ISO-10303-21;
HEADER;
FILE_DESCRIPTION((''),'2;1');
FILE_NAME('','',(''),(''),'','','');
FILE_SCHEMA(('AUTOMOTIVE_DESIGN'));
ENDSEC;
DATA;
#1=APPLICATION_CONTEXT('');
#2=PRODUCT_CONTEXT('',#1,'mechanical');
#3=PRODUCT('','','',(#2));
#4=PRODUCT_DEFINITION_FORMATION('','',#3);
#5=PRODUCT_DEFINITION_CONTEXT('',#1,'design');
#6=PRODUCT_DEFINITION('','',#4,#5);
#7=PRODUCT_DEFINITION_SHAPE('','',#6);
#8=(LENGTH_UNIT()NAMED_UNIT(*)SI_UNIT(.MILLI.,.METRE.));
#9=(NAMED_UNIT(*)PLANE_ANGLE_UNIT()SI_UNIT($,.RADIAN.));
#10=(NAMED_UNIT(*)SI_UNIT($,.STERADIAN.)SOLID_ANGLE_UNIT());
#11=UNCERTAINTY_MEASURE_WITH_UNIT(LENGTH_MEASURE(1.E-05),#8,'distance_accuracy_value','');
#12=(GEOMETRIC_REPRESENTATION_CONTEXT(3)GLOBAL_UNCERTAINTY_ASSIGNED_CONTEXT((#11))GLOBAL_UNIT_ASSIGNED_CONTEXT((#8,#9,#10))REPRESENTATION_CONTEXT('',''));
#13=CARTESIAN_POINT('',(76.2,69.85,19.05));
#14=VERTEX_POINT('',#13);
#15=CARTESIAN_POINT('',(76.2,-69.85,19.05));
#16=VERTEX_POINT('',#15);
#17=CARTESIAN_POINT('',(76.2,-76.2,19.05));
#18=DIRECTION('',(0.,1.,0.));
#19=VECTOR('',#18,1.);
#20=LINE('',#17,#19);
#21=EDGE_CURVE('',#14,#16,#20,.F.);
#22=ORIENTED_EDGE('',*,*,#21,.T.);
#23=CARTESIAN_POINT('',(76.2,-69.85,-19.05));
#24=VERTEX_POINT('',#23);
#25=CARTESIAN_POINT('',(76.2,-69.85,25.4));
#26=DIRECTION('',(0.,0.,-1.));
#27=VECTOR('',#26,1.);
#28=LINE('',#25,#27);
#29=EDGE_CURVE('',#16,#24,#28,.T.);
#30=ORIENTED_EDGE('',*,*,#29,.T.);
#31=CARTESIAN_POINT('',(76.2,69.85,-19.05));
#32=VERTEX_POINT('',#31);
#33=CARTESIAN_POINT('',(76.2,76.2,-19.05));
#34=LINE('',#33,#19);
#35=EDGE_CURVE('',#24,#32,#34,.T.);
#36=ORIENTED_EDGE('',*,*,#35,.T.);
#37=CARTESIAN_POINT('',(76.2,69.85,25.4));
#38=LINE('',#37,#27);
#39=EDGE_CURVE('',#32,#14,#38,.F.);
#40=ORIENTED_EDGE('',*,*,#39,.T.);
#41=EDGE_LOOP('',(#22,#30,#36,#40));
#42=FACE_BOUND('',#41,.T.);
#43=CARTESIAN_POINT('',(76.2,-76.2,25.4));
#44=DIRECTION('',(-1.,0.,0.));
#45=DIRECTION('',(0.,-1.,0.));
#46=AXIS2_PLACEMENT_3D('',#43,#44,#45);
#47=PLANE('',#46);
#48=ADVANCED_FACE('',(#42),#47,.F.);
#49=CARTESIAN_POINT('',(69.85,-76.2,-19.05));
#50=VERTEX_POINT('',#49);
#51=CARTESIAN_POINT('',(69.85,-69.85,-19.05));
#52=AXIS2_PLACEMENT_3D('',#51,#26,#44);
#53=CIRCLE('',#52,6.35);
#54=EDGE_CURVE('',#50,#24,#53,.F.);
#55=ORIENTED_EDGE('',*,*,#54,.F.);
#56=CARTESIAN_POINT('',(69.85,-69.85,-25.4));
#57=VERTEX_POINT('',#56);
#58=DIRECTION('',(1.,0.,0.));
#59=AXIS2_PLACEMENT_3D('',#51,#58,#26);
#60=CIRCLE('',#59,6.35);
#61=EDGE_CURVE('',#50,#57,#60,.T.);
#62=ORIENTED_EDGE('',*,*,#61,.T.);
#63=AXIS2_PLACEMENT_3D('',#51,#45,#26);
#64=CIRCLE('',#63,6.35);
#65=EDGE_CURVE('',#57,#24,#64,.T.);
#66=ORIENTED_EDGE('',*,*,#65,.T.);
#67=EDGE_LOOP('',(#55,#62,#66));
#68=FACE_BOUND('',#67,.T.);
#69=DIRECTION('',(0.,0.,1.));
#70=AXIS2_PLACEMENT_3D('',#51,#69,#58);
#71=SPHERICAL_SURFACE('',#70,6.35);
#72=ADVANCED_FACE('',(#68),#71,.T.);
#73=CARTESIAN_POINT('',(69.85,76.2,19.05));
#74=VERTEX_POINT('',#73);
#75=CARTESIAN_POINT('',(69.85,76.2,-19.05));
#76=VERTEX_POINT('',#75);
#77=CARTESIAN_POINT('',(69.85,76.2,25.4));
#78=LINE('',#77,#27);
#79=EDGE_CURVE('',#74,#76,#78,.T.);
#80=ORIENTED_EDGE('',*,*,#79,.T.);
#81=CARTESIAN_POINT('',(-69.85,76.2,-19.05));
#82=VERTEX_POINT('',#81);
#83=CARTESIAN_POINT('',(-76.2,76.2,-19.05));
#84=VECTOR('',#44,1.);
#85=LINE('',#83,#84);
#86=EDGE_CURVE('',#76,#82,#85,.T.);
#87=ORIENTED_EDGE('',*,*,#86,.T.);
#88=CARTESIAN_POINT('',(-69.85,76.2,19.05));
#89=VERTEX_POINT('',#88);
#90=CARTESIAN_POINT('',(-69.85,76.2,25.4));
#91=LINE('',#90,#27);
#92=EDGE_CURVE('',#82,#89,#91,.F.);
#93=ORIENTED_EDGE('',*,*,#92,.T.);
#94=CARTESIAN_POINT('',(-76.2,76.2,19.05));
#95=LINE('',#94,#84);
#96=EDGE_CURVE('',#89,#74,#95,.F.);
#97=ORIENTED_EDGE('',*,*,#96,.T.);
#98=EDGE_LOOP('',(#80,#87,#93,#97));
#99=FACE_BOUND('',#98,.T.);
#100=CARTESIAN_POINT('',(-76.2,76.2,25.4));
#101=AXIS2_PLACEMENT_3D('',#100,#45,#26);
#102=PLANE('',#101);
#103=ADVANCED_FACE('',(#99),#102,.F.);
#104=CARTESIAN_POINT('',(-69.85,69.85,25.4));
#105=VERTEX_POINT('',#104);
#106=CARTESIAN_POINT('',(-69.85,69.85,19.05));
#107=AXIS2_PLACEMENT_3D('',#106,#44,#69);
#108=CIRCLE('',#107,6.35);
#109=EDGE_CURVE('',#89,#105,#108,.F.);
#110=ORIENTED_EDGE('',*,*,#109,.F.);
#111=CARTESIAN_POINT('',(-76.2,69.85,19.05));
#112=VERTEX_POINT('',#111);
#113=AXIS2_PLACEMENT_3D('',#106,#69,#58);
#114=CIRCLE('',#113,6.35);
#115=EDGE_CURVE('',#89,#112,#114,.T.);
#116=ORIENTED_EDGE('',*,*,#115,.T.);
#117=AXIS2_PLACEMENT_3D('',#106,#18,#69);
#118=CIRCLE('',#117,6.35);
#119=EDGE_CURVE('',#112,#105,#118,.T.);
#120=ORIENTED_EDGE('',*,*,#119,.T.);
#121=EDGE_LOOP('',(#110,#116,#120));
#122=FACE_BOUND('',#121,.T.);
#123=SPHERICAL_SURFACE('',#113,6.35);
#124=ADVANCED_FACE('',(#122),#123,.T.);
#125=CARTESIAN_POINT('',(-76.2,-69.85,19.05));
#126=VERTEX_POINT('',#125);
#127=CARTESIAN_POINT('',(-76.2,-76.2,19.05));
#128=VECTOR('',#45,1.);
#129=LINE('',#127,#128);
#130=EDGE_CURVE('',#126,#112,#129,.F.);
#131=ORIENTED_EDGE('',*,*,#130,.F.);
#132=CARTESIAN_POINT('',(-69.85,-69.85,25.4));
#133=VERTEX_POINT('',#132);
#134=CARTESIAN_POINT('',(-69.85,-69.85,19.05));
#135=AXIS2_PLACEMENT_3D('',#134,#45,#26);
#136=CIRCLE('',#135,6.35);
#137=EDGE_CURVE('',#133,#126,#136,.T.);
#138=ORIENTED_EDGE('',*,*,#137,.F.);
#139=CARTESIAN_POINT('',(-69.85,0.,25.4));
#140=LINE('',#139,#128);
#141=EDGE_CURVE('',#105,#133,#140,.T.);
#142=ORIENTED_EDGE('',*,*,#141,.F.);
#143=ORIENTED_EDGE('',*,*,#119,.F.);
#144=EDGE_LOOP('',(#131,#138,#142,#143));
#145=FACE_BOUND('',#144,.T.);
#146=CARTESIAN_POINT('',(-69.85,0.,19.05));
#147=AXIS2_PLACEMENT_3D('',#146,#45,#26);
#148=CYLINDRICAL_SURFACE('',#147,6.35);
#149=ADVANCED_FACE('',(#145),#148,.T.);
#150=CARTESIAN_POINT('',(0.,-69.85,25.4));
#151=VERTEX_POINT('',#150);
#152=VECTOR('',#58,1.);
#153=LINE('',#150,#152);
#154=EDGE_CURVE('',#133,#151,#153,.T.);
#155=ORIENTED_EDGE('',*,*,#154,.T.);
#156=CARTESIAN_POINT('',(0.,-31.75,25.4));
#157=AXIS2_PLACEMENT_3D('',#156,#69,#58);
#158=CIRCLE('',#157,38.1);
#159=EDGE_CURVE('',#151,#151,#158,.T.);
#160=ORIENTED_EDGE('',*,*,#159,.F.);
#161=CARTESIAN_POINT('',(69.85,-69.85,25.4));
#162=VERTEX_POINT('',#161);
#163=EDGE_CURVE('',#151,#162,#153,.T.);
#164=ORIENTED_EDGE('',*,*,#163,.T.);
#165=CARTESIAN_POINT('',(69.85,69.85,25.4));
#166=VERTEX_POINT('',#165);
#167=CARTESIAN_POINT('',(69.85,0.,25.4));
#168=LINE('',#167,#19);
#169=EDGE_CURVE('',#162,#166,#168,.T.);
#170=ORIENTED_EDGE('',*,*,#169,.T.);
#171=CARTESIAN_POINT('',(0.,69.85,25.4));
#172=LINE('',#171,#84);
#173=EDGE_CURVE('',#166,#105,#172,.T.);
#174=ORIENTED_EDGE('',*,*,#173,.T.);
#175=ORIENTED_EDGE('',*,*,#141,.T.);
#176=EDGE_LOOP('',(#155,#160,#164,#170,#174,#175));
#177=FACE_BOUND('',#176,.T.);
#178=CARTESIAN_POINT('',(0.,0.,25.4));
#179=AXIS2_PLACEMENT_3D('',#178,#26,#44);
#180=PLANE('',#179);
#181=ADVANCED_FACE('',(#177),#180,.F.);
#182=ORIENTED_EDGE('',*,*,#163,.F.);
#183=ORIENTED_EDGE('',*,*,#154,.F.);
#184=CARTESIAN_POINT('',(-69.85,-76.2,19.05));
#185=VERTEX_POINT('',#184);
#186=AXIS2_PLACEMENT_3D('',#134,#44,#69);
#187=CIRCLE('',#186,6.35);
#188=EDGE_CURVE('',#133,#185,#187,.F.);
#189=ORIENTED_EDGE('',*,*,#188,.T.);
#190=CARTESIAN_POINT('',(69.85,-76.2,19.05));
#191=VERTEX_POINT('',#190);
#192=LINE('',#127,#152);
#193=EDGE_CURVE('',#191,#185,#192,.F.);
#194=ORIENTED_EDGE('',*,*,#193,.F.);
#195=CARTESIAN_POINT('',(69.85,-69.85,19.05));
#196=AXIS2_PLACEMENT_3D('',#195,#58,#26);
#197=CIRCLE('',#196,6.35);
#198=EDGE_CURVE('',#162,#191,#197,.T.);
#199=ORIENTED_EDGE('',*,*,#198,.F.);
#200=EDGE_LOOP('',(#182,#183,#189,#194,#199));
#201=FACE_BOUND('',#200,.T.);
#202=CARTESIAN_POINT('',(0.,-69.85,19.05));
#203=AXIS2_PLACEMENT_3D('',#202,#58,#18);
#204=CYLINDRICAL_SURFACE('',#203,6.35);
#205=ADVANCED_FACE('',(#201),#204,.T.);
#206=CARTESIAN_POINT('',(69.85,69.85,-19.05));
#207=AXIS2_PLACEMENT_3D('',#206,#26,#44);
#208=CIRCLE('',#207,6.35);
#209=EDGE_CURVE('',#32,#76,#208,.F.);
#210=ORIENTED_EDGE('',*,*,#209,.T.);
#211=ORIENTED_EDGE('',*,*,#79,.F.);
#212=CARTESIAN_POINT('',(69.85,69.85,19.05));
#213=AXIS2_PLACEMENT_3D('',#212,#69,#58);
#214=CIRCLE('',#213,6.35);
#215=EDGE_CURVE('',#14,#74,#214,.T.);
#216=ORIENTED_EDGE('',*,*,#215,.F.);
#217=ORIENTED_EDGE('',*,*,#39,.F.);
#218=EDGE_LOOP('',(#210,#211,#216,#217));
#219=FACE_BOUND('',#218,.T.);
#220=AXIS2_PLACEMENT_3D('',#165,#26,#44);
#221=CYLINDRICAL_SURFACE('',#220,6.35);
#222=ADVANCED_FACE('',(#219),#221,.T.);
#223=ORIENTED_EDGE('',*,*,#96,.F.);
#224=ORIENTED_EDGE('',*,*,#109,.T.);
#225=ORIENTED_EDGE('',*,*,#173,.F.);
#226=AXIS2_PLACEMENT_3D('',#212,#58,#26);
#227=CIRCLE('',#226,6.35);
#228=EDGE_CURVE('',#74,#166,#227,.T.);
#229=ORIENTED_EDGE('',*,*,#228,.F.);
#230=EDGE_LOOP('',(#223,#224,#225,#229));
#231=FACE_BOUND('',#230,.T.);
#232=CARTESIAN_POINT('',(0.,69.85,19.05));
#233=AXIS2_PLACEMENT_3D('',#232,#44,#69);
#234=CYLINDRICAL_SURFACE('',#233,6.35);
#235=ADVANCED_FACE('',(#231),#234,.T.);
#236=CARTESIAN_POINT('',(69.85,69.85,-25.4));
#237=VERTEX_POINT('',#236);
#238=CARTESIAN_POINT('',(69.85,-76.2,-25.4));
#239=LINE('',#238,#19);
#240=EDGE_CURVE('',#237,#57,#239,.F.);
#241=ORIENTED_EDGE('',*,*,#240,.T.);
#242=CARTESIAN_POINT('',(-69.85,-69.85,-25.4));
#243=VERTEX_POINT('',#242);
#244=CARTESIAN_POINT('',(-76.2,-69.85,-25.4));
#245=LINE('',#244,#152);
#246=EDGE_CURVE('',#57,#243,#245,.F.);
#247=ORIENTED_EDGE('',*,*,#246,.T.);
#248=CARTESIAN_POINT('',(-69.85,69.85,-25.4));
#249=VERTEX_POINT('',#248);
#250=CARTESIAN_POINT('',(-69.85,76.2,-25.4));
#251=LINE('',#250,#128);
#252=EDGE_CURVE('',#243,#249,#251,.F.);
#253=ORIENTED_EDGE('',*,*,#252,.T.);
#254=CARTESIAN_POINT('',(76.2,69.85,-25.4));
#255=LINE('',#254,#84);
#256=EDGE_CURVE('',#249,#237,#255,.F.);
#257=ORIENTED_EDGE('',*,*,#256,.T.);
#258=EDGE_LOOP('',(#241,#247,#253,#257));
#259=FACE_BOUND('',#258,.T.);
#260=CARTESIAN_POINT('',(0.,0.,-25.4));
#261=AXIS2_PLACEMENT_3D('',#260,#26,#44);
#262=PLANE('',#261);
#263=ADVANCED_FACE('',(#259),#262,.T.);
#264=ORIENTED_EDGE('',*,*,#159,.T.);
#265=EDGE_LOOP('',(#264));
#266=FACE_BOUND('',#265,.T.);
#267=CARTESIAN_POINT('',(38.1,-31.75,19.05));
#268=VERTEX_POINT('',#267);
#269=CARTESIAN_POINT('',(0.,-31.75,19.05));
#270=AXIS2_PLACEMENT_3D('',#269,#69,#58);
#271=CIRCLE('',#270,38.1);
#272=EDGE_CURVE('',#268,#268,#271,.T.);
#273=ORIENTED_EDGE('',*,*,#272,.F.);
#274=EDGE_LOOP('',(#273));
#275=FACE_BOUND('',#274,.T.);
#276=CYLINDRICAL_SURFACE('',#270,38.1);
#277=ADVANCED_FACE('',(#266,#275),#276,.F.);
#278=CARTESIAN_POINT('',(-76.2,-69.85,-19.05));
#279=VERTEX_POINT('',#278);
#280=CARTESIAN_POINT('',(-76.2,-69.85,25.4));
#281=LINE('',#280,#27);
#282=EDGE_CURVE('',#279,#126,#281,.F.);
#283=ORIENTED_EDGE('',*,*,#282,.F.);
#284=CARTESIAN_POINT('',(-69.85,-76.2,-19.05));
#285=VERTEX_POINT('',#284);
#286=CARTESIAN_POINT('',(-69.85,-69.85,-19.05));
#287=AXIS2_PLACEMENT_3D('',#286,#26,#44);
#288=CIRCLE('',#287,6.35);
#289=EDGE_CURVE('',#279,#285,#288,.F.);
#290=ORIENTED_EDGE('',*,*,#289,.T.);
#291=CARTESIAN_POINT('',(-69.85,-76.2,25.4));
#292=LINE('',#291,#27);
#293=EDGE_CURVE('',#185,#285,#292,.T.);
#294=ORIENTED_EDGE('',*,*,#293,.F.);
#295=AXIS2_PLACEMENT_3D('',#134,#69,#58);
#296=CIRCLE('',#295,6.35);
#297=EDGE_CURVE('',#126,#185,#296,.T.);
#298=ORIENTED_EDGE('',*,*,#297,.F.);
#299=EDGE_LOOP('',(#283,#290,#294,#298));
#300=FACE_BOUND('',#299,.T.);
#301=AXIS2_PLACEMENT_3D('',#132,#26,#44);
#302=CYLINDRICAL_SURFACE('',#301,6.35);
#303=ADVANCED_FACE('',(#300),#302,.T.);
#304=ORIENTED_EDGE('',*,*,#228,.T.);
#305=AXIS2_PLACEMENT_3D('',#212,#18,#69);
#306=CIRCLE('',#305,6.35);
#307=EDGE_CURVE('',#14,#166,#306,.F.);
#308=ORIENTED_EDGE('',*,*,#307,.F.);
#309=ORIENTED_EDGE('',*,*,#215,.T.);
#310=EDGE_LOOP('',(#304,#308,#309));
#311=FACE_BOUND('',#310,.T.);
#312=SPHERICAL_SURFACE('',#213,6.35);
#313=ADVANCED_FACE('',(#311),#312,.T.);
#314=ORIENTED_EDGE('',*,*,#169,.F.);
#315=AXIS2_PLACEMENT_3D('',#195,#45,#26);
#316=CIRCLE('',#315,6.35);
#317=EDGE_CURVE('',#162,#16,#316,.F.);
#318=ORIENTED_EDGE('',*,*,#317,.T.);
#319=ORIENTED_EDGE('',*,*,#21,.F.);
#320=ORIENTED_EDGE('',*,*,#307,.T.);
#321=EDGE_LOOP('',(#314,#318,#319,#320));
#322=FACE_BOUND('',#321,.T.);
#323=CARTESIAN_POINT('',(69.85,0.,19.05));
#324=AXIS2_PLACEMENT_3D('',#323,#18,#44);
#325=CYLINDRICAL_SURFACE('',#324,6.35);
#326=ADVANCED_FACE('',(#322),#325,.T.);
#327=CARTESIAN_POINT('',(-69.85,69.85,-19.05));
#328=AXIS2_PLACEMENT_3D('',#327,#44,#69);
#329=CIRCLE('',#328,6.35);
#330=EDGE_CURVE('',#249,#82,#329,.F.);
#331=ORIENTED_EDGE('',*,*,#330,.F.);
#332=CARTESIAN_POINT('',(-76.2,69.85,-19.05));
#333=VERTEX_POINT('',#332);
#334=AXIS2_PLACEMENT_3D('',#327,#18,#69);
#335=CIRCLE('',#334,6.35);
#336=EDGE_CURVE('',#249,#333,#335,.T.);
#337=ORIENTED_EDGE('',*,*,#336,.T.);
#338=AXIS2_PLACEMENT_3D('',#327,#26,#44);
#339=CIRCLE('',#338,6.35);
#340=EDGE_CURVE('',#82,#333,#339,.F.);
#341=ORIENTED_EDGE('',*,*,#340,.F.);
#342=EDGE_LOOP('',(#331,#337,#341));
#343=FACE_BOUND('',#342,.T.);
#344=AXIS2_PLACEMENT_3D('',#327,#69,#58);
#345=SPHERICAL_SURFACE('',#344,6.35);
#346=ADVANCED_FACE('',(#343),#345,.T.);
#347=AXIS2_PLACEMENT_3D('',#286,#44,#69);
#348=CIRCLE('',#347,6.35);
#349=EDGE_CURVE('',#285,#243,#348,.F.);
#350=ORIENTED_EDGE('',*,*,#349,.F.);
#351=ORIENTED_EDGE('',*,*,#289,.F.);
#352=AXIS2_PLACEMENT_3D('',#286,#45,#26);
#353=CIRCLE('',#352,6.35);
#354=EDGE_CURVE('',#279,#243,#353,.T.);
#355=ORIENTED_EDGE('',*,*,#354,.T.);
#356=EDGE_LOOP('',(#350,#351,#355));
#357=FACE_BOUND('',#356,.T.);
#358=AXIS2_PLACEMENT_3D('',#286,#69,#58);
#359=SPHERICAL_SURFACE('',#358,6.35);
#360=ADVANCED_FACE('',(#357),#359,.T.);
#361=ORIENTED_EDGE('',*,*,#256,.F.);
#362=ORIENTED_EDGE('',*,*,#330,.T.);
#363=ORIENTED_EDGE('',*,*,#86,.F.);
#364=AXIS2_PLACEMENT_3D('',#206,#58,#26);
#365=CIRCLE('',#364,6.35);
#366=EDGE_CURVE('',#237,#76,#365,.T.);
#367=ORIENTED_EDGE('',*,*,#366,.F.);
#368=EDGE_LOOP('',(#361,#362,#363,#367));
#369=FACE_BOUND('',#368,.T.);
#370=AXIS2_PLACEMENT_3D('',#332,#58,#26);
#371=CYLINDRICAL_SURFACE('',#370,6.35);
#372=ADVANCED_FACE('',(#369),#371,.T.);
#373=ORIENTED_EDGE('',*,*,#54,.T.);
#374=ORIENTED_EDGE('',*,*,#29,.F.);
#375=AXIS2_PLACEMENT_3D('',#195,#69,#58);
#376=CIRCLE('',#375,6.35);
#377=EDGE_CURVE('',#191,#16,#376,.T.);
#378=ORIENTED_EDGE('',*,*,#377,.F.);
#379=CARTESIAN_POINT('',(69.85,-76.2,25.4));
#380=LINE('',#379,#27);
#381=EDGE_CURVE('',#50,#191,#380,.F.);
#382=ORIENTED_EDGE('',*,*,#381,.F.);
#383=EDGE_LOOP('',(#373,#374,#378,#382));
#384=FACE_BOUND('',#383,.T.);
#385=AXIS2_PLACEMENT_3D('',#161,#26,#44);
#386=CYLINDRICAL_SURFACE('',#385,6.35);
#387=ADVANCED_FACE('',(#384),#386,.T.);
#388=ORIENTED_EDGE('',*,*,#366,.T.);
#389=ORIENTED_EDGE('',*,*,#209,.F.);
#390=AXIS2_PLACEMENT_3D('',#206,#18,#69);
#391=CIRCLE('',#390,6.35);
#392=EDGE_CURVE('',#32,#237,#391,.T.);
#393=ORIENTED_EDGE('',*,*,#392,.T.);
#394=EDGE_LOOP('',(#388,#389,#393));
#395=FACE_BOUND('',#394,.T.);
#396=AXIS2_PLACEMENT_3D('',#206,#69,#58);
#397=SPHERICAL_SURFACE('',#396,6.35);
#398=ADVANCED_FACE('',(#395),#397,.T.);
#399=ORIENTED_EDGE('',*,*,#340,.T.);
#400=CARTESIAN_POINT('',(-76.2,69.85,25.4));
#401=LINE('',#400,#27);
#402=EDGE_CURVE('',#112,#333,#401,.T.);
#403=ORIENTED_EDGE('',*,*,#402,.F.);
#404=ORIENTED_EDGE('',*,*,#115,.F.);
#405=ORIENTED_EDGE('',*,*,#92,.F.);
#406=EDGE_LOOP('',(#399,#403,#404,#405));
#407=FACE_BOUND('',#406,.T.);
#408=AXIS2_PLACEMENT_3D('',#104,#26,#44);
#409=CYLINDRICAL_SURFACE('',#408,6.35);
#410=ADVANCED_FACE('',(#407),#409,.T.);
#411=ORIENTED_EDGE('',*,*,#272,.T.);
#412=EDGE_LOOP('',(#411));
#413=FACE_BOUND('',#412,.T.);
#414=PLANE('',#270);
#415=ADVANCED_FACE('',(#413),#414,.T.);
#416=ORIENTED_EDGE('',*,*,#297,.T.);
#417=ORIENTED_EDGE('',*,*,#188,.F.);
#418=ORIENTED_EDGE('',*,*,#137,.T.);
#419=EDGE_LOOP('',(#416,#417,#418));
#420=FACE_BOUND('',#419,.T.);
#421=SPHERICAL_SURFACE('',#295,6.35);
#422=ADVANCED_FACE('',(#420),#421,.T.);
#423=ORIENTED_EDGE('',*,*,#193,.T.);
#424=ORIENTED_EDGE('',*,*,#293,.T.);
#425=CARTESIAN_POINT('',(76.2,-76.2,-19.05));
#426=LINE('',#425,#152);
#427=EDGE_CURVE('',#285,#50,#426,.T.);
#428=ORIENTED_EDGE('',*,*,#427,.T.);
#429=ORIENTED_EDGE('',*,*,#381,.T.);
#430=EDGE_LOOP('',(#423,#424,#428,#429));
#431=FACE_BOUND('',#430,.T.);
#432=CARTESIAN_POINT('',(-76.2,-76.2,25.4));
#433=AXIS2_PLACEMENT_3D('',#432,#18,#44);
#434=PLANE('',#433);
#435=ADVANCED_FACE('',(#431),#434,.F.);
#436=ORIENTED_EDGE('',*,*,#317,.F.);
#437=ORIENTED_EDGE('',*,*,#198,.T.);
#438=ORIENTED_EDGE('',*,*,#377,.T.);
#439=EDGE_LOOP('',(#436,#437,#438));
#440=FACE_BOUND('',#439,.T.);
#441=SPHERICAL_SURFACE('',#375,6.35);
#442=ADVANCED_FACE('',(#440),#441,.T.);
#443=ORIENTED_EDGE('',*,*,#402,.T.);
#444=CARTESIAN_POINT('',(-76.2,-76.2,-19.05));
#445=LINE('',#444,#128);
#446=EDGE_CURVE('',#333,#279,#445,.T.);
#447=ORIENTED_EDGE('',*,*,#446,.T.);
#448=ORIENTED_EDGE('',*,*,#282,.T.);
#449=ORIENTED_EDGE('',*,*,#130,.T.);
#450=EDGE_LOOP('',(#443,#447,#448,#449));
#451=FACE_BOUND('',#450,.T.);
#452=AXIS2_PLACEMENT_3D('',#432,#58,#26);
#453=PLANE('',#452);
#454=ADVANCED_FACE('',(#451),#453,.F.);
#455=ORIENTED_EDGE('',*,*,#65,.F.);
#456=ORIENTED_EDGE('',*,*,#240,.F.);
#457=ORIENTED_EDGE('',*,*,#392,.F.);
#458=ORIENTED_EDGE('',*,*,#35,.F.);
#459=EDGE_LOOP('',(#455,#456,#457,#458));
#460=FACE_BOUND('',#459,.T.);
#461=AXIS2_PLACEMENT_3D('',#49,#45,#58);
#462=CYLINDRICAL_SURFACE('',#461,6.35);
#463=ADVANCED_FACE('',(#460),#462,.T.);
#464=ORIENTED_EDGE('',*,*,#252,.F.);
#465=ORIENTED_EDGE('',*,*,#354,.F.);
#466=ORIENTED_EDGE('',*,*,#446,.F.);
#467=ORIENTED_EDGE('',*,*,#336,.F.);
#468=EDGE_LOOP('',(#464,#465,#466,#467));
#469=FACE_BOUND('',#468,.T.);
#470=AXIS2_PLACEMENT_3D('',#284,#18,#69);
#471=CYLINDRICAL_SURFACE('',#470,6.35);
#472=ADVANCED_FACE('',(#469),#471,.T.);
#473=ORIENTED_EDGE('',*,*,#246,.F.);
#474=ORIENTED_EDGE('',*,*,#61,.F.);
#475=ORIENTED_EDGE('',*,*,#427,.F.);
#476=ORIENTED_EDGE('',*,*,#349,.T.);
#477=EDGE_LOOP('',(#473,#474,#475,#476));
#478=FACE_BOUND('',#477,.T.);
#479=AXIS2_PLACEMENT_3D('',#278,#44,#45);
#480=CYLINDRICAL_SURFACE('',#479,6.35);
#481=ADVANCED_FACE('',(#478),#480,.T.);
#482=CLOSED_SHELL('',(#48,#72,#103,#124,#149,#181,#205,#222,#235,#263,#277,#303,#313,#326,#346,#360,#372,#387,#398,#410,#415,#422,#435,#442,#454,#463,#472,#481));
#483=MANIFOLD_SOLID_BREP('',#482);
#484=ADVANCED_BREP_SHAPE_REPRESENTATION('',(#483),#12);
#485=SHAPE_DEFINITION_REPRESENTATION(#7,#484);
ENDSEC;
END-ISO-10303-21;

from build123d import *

# Parameters (mm, degrees)
SKETCH1_W           = 152.4
SKETCH1_H           = 152.4
BOSS_EXTRUDE1_DEPTH = 25.4
SKETCH2_R           = 38.1
CUT_EXTRUDE1_DEPTH  = 6.35
FILLET1_R           = 6.35


with BuildPart() as part:
    # Sketch1 → Boss-Extrude1 (new, symmetric)
    with BuildSketch(Plane.XY):
        Rectangle(SKETCH1_W, SKETCH1_H)
    extrude(amount=BOSS_EXTRUDE1_DEPTH, both=True)

    # Sketch2 → Cut-Extrude1 (cut)
    with BuildSketch(Plane.XY.offset(25.4)):
        with Locations((0, -31.75)):
            Circle(SKETCH2_R)
    extrude(amount=-CUT_EXTRUDE1_DEPTH, mode=Mode.SUBTRACT)

    # Fillet1
    fillet1_edges = [part.edges().sort_by_distance(p)[0] for p in [
        (-76.2, 0, 25.4),
        (0, -76.2, 25.4),
        (76.2, 0, 25.4),
        (0, -76.2, -25.4),
        (-76.2, 0, -25.4),
        (0, 76.2, -25.4),
        (76.2, 0, -25.4),
        (76.2, -76.2, 0),
        (-76.2, -76.2, 0),
        (-76.2, 76.2, 0),
        (76.2, 76.2, 0),
        (0, 76.2, 25.4),
    ]]
    fillet(fillet1_edges, radius=FILLET1_R - 0.0001)  # a hair under: the kernel refuses the full size


solid = part.part
